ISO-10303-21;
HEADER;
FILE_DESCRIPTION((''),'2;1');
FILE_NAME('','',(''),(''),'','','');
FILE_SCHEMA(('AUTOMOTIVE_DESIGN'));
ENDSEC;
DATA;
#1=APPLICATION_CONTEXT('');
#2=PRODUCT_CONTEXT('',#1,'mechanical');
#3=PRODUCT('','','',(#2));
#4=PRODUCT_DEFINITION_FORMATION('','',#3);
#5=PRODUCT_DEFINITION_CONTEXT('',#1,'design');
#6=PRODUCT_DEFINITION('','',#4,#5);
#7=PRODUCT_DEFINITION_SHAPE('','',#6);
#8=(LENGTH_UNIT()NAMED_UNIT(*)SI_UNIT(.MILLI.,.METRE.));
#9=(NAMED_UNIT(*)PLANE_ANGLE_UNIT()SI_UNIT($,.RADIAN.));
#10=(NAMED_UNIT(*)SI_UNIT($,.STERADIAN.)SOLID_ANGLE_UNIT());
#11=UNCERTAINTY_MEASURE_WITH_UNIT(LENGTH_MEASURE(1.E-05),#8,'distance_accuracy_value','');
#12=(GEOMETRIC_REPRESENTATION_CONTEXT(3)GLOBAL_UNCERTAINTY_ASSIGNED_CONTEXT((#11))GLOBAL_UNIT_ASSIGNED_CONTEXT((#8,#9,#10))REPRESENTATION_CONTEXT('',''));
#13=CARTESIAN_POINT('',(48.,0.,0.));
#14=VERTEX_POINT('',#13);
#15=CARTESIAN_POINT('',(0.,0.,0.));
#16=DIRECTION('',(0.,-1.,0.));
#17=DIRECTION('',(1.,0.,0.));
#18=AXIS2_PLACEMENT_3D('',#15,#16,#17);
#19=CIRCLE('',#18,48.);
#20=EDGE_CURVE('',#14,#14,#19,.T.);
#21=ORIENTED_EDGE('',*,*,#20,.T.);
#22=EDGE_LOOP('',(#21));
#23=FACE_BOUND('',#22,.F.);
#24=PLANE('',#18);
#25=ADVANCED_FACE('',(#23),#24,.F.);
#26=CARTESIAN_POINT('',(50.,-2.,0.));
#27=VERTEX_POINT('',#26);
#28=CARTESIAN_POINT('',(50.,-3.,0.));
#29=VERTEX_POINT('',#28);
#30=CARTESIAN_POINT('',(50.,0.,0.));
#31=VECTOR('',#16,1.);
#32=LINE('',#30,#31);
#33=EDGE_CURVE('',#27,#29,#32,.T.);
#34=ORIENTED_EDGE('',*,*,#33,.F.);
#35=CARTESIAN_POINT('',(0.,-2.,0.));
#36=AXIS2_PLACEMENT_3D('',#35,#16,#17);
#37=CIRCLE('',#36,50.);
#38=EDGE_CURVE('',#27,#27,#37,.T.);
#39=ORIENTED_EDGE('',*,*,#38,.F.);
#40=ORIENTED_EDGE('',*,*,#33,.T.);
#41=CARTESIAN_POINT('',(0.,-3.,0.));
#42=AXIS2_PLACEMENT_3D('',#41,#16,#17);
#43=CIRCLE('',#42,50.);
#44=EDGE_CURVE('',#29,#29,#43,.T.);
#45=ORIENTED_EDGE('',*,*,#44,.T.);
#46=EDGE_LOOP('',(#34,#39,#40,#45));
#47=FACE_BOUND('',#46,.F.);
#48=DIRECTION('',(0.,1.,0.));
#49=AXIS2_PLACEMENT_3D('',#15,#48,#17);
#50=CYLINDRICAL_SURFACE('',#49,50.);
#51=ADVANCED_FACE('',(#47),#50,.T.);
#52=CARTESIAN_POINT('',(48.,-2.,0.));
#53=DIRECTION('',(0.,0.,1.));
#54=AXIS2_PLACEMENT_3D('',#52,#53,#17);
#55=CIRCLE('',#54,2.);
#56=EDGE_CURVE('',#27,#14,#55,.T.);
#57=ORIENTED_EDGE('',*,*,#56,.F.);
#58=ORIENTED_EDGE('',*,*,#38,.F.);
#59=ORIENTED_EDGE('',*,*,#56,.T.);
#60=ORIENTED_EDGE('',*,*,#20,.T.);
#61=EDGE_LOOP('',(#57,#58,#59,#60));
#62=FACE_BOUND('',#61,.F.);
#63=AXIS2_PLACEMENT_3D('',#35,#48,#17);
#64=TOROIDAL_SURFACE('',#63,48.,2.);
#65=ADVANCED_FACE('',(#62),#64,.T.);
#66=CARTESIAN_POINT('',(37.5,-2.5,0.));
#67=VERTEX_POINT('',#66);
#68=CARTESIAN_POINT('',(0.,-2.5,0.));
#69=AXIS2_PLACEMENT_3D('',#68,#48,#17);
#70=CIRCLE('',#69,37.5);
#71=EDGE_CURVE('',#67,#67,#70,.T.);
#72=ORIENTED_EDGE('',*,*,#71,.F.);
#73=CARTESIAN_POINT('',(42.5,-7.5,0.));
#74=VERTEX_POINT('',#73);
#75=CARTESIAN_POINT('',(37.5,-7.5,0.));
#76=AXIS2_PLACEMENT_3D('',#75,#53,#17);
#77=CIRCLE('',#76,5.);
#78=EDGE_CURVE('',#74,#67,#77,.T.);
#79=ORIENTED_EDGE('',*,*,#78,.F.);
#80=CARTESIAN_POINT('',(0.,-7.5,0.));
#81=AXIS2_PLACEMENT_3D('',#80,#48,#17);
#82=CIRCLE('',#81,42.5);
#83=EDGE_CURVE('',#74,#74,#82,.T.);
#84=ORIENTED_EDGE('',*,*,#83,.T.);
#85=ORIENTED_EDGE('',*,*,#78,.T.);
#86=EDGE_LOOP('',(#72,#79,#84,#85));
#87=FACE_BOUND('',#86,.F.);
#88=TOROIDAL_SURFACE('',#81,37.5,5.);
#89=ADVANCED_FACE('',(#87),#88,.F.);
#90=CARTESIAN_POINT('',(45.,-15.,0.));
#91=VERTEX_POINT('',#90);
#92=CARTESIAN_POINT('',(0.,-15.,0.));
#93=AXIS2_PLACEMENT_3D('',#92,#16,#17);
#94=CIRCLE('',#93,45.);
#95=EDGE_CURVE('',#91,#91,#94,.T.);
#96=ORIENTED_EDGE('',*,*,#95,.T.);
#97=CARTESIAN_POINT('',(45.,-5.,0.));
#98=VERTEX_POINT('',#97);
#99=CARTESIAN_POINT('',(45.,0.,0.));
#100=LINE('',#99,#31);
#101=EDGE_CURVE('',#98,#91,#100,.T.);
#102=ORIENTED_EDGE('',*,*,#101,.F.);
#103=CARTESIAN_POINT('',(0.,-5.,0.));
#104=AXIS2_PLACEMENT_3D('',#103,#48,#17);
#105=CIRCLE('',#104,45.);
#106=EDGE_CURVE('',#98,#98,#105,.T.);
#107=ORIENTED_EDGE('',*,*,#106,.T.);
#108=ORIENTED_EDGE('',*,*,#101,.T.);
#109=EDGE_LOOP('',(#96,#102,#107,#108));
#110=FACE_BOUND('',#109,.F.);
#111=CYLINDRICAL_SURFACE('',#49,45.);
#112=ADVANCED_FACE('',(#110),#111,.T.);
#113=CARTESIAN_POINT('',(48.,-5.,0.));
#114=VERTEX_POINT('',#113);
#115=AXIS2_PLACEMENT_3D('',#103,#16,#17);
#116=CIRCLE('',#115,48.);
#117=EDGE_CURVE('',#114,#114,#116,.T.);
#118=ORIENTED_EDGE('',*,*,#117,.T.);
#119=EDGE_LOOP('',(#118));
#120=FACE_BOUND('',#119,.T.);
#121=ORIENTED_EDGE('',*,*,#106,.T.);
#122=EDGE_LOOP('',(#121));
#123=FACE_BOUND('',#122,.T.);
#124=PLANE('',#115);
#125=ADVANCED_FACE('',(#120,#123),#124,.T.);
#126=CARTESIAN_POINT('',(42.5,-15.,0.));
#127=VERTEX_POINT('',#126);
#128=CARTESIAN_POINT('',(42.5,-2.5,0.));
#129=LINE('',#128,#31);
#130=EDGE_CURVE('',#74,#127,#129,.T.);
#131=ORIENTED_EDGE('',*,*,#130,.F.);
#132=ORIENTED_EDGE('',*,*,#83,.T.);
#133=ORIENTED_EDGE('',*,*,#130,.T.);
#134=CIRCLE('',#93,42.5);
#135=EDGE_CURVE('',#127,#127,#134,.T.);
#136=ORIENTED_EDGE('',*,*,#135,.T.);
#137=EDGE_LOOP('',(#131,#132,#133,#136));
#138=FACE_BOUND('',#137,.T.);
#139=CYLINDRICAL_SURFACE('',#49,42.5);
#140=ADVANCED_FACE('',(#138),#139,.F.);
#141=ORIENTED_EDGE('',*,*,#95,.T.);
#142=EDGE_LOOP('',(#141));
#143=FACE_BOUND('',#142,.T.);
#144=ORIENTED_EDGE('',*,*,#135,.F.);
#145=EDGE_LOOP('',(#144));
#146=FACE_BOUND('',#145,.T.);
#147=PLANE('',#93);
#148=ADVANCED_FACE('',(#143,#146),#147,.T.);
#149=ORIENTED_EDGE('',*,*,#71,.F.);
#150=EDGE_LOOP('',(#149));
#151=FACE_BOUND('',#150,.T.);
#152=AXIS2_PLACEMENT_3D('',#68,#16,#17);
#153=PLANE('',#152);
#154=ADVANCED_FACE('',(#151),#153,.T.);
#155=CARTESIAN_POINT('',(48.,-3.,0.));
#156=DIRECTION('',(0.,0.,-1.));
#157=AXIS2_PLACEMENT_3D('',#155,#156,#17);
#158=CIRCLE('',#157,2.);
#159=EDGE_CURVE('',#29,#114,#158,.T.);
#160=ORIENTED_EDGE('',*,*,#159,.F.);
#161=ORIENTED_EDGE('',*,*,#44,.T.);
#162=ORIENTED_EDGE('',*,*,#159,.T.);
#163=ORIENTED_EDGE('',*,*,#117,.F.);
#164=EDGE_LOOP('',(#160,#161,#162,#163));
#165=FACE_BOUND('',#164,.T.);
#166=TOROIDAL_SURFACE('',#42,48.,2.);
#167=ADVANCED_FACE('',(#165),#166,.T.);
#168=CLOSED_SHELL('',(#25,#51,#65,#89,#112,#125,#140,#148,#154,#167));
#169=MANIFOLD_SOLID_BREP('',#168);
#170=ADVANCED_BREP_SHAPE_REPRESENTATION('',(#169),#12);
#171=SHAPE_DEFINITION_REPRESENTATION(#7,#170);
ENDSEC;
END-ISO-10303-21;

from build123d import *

# Parameters (mm, degrees)
F0_R     = 50
F1_DEPTH = 5
F3_R     = 2
F2_R     = 45
F4_DEPTH = 15
F5_T     = 2.5
F6_R     = 5


# Not quite as in the source:
# - a shell that OpenCascade refuses in one call is made with other operations: the cavity is built on its own and cut out


with BuildPart() as f1:
    # F0 (on Front) → F1 (new body)
    with BuildSketch(Plane.XZ):
        Circle(F0_R)
    extrude(amount=F1_DEPTH)

    # F3
    f3_edges = [f1.edges().sort_by_distance(p)[0] for p in [
        (-50, -5, 0),
        (-50, 0, 0),
    ]]
    fillet(f3_edges, radius=F3_R)

    # F2 (on Front) → F4 (join)
    with BuildSketch(Plane.XZ):
        Circle(F2_R)
    extrude(amount=F4_DEPTH)

    # F5: shell of thickness 2.5, made by hand


with BuildPart() as f5_core1:
    # F5_t2: copy of F1
    add(f1.part)

    # the walls: a layer under each face that stays
    f5_faces = [f5_core1.faces().sort_by_distance(p)[0] for p in [
        (-50, -2.5, 0),
        (0, 0, 0),
        (-32, -5, -32),
        (-45, -10, 0),
    ]]
    thicken(f5_faces, amount=-F5_T, mode=Mode.SUBTRACT)

    # F5_s3 → F5_t4 (revolve, cut)
    with BuildSketch(Plane.XY):
        Polygon((45.025, -5.025), (45, -2.5), (42.5, -2.5), (42.5, -5), align=None)
    revolve(axis=Axis((0, -5, 0), (0, 1, 0)), mode=Mode.SUBTRACT)


with BuildPart() as f1_1:
    add(f1.part)

    # what is left inside the walls is the cavity
    f5_cavity = [f5_core1.part.solids().sort_by_distance(p)[0] for p in [
        (0, -2.525, -14.166667),
    ]]
    add(f5_cavity, mode=Mode.SUBTRACT)

    # F6
    f6_edges = [f1_1.edges().sort_by_distance(p)[0] for p in [
        (42.5, -8.75, 0),
        (-42.5, -2.5, 0),
    ]]
    fillet(f6_edges, radius=F6_R)


solid = f1_1.part
